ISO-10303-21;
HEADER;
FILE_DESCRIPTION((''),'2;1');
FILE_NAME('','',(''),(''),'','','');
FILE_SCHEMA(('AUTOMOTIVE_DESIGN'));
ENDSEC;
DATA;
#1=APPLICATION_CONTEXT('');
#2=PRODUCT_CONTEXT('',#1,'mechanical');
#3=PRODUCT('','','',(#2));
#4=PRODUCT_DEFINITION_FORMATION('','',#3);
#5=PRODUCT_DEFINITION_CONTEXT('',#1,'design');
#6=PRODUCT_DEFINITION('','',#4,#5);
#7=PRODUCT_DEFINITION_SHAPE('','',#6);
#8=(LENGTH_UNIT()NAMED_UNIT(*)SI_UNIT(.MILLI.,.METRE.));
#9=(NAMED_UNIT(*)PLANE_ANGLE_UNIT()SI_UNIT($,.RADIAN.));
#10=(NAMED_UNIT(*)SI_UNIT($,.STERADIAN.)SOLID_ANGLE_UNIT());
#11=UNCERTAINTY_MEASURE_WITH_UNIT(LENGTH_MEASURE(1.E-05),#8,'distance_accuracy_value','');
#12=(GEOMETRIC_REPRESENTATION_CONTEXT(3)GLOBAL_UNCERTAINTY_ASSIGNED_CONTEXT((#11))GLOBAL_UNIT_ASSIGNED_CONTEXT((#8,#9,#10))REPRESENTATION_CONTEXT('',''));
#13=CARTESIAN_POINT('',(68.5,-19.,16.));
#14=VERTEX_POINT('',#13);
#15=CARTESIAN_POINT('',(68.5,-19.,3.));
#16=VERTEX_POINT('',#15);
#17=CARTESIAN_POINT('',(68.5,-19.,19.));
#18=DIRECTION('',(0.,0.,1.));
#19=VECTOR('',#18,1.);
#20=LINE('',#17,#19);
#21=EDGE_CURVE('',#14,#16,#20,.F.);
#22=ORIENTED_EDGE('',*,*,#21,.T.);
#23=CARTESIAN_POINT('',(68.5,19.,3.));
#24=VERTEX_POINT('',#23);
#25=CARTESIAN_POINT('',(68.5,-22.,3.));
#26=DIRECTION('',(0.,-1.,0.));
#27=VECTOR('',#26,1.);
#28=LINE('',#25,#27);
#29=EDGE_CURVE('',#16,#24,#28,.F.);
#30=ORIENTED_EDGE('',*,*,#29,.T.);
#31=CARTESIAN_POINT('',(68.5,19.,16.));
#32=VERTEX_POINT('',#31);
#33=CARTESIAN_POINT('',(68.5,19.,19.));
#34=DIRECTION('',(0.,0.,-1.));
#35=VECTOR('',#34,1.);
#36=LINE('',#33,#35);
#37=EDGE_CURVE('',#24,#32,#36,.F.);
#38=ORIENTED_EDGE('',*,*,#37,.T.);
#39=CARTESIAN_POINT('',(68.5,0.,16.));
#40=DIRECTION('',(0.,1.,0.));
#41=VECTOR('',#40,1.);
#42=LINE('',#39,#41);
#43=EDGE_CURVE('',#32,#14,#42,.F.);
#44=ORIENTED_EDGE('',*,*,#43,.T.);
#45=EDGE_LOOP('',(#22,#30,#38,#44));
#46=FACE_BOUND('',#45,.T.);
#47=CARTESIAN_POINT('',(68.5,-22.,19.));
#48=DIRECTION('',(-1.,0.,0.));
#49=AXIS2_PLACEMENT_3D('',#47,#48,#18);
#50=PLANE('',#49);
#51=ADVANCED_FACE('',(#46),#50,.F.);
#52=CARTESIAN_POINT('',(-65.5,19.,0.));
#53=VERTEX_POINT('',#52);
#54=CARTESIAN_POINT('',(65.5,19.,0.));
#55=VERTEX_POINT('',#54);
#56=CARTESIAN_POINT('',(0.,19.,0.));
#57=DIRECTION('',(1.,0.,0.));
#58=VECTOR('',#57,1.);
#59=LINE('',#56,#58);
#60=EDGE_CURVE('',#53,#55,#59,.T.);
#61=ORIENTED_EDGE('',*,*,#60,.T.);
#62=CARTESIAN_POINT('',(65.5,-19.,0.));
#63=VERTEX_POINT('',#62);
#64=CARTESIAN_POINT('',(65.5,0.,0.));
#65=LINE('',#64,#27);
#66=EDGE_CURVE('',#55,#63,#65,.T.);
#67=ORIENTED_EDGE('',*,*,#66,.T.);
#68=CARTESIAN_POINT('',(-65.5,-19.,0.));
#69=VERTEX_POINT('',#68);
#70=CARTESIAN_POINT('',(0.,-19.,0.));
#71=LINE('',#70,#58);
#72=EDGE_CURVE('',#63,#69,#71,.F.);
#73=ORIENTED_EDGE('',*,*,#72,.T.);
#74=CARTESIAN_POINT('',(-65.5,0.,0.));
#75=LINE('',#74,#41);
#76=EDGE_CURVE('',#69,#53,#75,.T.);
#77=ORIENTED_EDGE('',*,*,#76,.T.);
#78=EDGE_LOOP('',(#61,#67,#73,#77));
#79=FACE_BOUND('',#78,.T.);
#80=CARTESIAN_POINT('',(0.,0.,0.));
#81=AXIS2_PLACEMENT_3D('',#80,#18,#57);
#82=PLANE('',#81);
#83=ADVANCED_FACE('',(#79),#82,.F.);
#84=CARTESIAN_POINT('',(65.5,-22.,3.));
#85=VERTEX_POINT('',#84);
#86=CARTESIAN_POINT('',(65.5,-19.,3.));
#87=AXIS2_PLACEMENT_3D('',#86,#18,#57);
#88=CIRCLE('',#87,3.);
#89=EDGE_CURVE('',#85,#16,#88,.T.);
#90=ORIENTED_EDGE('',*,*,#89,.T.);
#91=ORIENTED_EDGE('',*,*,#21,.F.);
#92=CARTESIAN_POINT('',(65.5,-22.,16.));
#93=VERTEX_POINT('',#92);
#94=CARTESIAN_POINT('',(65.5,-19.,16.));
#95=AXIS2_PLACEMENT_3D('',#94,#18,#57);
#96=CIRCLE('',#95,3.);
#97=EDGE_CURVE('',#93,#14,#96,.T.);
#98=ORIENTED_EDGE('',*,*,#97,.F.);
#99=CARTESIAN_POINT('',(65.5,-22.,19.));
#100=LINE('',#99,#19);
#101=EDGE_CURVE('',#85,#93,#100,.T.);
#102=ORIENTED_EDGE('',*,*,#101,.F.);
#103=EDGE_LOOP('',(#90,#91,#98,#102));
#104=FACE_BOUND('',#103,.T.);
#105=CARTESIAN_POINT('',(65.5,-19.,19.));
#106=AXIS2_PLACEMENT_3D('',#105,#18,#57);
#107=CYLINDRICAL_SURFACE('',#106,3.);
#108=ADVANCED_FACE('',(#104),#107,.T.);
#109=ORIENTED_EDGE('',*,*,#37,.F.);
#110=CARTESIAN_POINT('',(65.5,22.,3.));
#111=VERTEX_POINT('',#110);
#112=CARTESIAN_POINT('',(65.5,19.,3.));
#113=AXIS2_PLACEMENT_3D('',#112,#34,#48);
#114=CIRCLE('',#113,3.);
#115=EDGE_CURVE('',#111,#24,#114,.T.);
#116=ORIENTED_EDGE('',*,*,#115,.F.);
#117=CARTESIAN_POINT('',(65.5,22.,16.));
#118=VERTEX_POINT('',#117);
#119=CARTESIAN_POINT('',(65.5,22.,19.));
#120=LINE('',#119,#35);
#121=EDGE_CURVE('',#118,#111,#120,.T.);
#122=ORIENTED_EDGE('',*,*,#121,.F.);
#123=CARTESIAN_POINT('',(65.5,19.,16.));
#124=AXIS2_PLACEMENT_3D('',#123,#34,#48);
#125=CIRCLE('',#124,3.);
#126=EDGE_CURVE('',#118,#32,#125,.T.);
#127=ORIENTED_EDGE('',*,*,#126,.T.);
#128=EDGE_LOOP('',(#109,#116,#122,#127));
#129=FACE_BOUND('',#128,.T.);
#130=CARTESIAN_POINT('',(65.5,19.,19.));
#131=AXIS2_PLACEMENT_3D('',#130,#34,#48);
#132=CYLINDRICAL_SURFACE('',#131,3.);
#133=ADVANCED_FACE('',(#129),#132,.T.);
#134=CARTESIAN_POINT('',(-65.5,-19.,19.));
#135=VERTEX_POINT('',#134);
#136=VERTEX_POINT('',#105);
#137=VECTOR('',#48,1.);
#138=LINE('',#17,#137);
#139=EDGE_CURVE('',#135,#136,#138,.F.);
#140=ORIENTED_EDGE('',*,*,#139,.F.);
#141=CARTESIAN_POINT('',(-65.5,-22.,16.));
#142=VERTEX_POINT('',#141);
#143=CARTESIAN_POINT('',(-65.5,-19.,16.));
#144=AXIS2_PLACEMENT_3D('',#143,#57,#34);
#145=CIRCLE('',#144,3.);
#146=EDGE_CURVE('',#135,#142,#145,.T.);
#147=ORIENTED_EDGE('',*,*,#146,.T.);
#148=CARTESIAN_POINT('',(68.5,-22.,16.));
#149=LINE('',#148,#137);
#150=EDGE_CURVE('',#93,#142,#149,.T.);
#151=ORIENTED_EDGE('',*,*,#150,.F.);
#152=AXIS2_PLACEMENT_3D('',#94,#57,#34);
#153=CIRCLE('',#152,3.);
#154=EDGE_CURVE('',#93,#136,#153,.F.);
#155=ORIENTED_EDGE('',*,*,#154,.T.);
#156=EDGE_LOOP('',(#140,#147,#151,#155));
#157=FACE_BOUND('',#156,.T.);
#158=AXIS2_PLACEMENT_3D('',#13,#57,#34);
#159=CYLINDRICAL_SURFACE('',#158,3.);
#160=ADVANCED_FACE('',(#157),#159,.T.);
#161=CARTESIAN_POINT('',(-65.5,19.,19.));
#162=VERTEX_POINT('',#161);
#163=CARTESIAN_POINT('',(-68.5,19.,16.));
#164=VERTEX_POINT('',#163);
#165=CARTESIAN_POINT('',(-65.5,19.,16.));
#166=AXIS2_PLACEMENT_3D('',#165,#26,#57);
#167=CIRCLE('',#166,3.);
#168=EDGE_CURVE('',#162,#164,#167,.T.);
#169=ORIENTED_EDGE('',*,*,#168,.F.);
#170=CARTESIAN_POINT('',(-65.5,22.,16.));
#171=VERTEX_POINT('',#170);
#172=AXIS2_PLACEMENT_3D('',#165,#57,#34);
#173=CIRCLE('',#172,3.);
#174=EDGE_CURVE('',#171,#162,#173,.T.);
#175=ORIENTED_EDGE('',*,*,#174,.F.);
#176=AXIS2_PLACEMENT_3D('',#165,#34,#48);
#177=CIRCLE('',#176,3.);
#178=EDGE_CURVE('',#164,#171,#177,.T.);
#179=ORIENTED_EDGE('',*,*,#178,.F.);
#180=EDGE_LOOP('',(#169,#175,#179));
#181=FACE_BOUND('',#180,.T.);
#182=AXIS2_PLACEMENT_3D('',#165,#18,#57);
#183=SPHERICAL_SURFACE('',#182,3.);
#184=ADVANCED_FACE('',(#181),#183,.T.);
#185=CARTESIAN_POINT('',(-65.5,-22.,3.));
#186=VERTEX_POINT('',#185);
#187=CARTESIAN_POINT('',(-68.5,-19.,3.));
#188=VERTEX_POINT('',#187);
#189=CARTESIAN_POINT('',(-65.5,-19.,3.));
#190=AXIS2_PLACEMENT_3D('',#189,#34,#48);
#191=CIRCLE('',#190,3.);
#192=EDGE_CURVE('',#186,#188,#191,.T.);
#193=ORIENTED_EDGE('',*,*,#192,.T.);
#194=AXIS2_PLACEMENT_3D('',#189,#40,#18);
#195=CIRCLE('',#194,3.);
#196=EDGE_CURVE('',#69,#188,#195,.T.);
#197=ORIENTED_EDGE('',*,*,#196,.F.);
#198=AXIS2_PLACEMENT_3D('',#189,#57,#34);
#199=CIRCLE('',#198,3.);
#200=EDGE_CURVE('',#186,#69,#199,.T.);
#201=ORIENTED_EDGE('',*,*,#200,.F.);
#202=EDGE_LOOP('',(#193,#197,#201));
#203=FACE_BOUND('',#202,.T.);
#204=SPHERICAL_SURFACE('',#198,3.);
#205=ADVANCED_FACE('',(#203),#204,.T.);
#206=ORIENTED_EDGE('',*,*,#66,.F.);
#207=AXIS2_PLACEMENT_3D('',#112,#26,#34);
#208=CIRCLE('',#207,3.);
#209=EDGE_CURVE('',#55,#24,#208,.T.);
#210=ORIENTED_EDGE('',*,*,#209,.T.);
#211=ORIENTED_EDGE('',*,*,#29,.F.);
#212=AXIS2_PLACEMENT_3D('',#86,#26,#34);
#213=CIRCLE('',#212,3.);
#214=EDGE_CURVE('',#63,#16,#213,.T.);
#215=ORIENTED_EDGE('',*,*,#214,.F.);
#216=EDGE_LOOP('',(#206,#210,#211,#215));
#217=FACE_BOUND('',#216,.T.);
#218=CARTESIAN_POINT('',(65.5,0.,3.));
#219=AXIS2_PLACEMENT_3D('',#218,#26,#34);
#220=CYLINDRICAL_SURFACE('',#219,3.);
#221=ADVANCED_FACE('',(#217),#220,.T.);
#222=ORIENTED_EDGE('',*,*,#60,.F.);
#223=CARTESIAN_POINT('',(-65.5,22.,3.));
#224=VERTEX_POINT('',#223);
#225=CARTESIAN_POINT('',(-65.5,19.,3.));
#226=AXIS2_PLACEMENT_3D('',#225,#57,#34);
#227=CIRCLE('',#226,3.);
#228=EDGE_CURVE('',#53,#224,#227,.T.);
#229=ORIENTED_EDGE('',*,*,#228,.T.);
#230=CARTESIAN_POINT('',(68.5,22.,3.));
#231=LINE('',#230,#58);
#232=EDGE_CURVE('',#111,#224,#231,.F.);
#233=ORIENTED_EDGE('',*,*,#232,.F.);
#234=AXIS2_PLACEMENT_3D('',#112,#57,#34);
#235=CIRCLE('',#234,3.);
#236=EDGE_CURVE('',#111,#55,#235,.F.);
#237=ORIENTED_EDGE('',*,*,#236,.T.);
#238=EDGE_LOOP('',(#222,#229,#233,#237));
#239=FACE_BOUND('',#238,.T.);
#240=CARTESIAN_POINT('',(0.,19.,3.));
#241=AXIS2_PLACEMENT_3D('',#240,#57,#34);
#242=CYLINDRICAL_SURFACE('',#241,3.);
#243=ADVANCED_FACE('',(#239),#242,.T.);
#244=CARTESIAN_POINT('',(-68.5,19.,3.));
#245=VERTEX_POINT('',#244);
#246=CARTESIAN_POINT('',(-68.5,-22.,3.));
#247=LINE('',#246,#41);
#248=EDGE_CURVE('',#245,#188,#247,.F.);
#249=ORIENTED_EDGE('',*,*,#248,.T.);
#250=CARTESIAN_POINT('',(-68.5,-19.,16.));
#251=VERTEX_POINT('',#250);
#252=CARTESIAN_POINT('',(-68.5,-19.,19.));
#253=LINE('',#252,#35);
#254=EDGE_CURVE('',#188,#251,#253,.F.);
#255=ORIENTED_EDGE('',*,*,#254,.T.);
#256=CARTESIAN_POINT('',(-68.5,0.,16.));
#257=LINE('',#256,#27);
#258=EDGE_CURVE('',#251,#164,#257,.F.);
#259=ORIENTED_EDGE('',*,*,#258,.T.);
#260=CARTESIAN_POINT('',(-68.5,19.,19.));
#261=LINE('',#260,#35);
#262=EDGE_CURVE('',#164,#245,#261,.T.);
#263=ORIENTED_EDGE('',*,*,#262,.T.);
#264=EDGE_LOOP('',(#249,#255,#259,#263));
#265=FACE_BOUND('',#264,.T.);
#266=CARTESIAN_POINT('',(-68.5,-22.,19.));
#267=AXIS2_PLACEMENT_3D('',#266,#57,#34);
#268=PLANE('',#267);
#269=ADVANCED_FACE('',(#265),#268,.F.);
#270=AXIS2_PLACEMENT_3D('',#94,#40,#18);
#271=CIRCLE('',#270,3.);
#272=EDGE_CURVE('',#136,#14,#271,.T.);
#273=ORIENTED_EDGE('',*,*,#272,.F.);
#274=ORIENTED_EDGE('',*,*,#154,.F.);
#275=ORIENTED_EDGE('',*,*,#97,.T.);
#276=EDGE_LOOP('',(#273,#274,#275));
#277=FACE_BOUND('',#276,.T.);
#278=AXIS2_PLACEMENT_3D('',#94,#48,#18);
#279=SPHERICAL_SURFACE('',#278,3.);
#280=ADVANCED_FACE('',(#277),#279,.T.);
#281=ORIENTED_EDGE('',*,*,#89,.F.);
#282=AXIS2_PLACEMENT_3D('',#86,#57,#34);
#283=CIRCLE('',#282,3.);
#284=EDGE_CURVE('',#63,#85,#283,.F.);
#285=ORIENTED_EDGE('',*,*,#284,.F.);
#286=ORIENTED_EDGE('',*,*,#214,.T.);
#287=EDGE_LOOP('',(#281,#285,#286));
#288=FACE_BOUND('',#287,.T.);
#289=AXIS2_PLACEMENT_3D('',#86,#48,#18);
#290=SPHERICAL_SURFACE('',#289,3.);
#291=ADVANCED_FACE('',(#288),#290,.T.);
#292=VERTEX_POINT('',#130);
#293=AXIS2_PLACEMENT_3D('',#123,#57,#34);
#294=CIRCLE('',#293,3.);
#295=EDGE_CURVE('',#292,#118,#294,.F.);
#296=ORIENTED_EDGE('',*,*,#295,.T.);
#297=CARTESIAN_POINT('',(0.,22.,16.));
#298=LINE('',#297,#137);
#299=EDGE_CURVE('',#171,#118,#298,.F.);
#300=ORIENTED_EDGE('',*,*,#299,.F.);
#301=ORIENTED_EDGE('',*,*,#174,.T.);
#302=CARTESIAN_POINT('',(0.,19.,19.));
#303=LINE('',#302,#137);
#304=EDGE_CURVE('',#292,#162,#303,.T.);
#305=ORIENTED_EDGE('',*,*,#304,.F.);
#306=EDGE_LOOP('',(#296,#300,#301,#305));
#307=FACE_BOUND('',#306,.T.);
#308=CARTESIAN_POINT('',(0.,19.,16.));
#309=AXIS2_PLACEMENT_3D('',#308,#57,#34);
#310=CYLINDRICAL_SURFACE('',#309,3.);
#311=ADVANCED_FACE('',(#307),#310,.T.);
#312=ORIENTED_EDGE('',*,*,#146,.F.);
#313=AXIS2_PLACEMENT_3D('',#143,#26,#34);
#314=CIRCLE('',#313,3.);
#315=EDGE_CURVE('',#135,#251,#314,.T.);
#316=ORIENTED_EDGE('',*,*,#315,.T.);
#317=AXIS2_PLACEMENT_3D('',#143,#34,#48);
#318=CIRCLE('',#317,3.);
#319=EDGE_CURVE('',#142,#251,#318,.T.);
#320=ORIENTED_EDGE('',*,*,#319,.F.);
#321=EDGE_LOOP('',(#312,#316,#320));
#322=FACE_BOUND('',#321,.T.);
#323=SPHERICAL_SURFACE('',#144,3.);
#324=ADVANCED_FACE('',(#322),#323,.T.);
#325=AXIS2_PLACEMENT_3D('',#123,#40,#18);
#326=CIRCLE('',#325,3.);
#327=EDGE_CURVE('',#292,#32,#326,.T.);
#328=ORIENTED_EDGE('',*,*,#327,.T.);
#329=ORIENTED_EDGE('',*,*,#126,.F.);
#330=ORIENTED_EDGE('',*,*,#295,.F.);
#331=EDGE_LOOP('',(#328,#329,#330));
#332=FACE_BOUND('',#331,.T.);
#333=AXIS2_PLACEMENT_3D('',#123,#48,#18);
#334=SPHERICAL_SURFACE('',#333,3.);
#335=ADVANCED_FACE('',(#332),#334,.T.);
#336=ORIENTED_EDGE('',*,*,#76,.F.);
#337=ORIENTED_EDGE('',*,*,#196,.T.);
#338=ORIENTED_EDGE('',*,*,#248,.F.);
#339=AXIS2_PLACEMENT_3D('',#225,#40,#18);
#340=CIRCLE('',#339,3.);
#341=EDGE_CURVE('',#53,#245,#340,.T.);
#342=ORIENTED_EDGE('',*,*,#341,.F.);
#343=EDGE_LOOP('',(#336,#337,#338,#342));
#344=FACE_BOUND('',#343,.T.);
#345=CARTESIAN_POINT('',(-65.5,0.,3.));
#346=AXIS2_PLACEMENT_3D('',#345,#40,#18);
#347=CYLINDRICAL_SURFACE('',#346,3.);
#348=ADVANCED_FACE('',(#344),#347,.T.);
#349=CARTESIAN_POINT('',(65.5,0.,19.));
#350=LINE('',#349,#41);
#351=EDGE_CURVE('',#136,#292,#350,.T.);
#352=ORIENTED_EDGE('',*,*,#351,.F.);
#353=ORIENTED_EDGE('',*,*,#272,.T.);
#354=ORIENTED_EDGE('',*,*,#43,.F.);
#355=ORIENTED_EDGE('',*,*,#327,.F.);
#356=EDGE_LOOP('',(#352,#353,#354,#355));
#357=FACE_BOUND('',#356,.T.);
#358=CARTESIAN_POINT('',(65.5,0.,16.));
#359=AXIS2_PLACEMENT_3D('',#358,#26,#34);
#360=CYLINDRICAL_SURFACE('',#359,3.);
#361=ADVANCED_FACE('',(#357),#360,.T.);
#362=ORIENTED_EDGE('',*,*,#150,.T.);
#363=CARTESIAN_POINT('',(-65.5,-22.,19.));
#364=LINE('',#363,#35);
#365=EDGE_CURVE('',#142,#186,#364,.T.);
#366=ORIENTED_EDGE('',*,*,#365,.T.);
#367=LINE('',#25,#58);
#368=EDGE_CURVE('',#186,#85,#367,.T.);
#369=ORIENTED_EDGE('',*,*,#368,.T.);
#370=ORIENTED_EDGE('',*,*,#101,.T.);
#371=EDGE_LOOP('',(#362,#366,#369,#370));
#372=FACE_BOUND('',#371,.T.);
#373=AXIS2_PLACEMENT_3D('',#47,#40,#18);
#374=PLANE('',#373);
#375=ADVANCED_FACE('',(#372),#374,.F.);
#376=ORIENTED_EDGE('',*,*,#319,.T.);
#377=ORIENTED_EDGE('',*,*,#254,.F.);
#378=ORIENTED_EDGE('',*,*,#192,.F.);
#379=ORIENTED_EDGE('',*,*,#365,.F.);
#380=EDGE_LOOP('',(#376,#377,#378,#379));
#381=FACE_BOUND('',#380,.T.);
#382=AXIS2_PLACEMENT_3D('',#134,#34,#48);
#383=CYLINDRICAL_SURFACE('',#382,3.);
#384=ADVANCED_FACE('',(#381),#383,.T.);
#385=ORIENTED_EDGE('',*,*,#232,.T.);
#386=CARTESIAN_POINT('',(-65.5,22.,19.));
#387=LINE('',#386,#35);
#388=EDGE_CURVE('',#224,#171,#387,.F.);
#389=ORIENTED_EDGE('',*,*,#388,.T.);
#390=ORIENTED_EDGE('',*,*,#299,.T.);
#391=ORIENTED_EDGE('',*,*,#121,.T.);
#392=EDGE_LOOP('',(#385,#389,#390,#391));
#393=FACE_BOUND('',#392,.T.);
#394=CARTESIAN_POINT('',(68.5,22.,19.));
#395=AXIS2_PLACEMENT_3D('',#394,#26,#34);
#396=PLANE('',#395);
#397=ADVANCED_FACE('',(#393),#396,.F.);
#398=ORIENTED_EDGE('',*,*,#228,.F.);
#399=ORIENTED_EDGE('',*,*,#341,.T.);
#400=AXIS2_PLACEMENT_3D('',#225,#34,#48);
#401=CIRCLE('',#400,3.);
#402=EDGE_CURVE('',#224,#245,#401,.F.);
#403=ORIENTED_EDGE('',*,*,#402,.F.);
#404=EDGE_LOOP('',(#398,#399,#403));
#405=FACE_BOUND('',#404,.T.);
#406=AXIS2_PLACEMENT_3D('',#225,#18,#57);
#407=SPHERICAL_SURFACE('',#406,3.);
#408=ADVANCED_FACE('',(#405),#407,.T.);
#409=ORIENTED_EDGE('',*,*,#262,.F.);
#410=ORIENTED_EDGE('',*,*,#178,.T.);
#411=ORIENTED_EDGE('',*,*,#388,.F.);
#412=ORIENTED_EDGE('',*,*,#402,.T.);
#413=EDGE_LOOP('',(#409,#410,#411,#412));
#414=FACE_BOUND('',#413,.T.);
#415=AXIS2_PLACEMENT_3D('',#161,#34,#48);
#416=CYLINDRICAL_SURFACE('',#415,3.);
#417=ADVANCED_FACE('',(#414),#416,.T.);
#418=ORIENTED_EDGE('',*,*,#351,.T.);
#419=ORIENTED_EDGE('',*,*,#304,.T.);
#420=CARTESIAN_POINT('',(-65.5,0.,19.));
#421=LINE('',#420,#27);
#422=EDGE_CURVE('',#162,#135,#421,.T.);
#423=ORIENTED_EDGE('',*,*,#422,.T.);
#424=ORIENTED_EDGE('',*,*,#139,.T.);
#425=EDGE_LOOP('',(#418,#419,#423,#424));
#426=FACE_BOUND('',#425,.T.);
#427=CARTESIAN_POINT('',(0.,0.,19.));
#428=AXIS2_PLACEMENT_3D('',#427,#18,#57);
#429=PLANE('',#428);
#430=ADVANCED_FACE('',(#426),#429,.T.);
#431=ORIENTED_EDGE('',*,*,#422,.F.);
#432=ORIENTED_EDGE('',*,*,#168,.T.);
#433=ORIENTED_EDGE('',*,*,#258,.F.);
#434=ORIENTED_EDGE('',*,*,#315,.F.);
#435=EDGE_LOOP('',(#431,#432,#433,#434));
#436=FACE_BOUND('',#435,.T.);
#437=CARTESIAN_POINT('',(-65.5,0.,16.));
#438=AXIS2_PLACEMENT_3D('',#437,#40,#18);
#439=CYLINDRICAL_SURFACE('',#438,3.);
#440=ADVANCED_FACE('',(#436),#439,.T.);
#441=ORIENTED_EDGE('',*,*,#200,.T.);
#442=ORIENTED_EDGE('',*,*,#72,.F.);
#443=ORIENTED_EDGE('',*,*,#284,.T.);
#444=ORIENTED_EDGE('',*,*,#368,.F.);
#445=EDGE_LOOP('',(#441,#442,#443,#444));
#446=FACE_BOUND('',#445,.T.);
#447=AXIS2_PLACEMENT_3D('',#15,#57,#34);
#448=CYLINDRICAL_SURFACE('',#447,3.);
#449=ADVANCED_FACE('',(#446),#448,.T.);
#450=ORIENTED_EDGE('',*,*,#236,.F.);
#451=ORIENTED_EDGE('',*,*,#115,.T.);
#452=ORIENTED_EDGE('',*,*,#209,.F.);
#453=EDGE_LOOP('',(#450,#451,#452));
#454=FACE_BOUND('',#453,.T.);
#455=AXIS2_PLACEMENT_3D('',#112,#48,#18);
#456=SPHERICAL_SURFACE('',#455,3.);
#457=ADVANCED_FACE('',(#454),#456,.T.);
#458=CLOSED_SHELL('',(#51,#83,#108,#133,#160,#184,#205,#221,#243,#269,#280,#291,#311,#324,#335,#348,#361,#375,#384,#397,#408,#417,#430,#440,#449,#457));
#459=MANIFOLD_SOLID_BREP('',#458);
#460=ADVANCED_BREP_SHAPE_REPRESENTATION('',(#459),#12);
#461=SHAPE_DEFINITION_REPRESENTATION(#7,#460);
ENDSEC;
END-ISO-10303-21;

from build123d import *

# Parameters (mm, degrees)
CROQUIS2_W              = 137
CROQUIS2_H              = 44
SALIENTE_EXTRUIR1_DEPTH = 19
REDONDEO3_R             = 3
REDONDEO4_R             = 3
REDONDEO5_R             = 3
REDONDEO6_R             = 3
REDONDEO7_R             = 3


with BuildPart() as part:
    # Croquis2 → Saliente-Extruir1 (new body)
    with BuildSketch(Plane.XY):
        Rectangle(CROQUIS2_W, CROQUIS2_H)
    extrude(amount=SALIENTE_EXTRUIR1_DEPTH)

    # Redondeo3
    redondeo3_edges = [part.edges().sort_by_distance(p)[0] for p in [
        (0, -22, 0),
    ]]
    fillet(redondeo3_edges, radius=REDONDEO3_R)

    # Redondeo4
    redondeo4_edges = [part.edges().sort_by_distance(p)[0] for p in [
        (0, -22, 19),
    ]]
    fillet(redondeo4_edges, radius=REDONDEO4_R)

    # Redondeo5
    redondeo5_edges = [part.edges().sort_by_distance(p)[0] for p in [
        (0, 22, 19),
        (-68.5, 22, 9.5),
    ]]
    fillet(redondeo5_edges, radius=REDONDEO5_R)

    # Redondeo6
    # the kernel refuses this fillet: 3 mm, written as the material it takes off along each edge
    with BuildSketch(Plane(origin=(-65.5, 19, 16), x_dir=(-1, 0, 0), z_dir=(0, 0, 1))) as redondeo6_piece_1_section:
        Polygon((0, 0), (REDONDEO6_R, 0), (REDONDEO6_R, -REDONDEO6_R), (0, -REDONDEO6_R), align=None)
    redondeo6_piece_1 = extrude(amount=REDONDEO6_R, mode=Mode.PRIVATE)
    redondeo6_piece_1 = redondeo6_piece_1 - Plane(origin=(-65.5, 19, 16), x_dir=(0.7071067811865475, -0.7071067811865475, 0), z_dir=(0, 0, 1)) * Sphere(REDONDEO6_R, mode=Mode.PRIVATE)
    add(redondeo6_piece_1, mode=Mode.SUBTRACT)
    with BuildSketch(Plane(origin=(-68.5, -19, 3), x_dir=(0, -1, 0), z_dir=(0, 0, 1))) as redondeo6_piece_2:
        with BuildLine():
            CenterArc((3 - REDONDEO6_R, REDONDEO6_R), REDONDEO6_R, 270, 90)
            Line((3 - REDONDEO6_R, 0), (3, 0))
            Line((3, 0), (3, REDONDEO6_R))
        make_face()
    revolve(axis=Axis((-68.5, -19, 3), (1, 0, 0)), revolution_arc=90, mode=Mode.SUBTRACT)
    with BuildSketch(Plane(origin=(-68.5, -22, 3), x_dir=(1, 0, 0), z_dir=(0, 0, 1))) as redondeo6_piece_3:
        with BuildLine():
            CenterArc((REDONDEO6_R, REDONDEO6_R), REDONDEO6_R, 180, 90)
            Line((0, REDONDEO6_R), (0, 0))
            Line((0, 0), (REDONDEO6_R, 0))
        make_face()
    extrude(amount=13, mode=Mode.SUBTRACT)
    with BuildSketch(Plane(origin=(-68.5, -19, 16), x_dir=(0, -1, 0), z_dir=(0, 0, -1))) as redondeo6_piece_4:
        with BuildLine():
            CenterArc((3 - REDONDEO6_R, -REDONDEO6_R), REDONDEO6_R, 0, 90)
            Line((3 - REDONDEO6_R, 0), (3, 0))
            Line((3, 0), (3, -REDONDEO6_R))
        make_face()
    revolve(axis=Axis((-68.5, -19, 16), (-1, 0, 0)), revolution_arc=90, mode=Mode.SUBTRACT)
    with BuildSketch(Plane(origin=(-68.5, -19, 19), x_dir=(1, 0, 0), z_dir=(0, 1, 0))) as redondeo6_piece_5:
        with BuildLine():
            CenterArc((REDONDEO6_R, REDONDEO6_R), REDONDEO6_R, 180, 90)
            Line((0, REDONDEO6_R), (0, 0))
            Line((0, 0), (REDONDEO6_R, 0))
        make_face()
    extrude(amount=38, mode=Mode.SUBTRACT)
    with BuildSketch(Plane(origin=(-68.5, -19, 0), x_dir=(1, 0, 0), z_dir=(0, 1, 0))) as redondeo6_piece_6:
        with BuildLine():
            CenterArc((REDONDEO6_R, -REDONDEO6_R), REDONDEO6_R, 90, 90)
            Line((0, -REDONDEO6_R), (0, 0))
            Line((0, 0), (REDONDEO6_R, 0))
        make_face()
    extrude(amount=38, mode=Mode.SUBTRACT)
    with BuildSketch(Plane(origin=(-65.5, 19, 0), x_dir=(-1, 0, 0), z_dir=(0, -1, 0))) as redondeo6_piece_7:
        with BuildLine():
            CenterArc((3 - REDONDEO6_R, -REDONDEO6_R), REDONDEO6_R, 0, 90)
            Line((3, -REDONDEO6_R), (3, 0))
            Line((3, 0), (3 - REDONDEO6_R, 0))
        make_face()
    revolve(axis=Axis((-65.5, 19, 0), (0, 0, -1)), revolution_arc=90, mode=Mode.SUBTRACT)
    with BuildSketch(Plane(origin=(-65.5, 22, 0), x_dir=(0, 0, 1), z_dir=(1, 0, 0))) as redondeo6_piece_8:
        with BuildLine():
            CenterArc((REDONDEO6_R, REDONDEO6_R), REDONDEO6_R, 180, 90)
            Line((0, REDONDEO6_R), (0, 0))
            Line((0, 0), (REDONDEO6_R, 0))
        make_face()
    extrude(amount=141.5, mode=Mode.SUBTRACT)

    # Redondeo7
    redondeo7_edges = [part.edges().sort_by_distance(p)[0] for p in [
        (68.5, 0, 0),
        (68.5, -21.121320344, 0.878679656),
        (68.5, -22, 9.5),
        (68.5, 0, 19),
        (68.5, -21.121320344, 18.121320344),
        (68.5, 22, 9.5),
        (68.5, 21.121320344, 18.121320344),
        (68.5, 21.121320344, 0.878679656),
    ]]
    fillet(redondeo7_edges, radius=REDONDEO7_R)


solid = part.part
